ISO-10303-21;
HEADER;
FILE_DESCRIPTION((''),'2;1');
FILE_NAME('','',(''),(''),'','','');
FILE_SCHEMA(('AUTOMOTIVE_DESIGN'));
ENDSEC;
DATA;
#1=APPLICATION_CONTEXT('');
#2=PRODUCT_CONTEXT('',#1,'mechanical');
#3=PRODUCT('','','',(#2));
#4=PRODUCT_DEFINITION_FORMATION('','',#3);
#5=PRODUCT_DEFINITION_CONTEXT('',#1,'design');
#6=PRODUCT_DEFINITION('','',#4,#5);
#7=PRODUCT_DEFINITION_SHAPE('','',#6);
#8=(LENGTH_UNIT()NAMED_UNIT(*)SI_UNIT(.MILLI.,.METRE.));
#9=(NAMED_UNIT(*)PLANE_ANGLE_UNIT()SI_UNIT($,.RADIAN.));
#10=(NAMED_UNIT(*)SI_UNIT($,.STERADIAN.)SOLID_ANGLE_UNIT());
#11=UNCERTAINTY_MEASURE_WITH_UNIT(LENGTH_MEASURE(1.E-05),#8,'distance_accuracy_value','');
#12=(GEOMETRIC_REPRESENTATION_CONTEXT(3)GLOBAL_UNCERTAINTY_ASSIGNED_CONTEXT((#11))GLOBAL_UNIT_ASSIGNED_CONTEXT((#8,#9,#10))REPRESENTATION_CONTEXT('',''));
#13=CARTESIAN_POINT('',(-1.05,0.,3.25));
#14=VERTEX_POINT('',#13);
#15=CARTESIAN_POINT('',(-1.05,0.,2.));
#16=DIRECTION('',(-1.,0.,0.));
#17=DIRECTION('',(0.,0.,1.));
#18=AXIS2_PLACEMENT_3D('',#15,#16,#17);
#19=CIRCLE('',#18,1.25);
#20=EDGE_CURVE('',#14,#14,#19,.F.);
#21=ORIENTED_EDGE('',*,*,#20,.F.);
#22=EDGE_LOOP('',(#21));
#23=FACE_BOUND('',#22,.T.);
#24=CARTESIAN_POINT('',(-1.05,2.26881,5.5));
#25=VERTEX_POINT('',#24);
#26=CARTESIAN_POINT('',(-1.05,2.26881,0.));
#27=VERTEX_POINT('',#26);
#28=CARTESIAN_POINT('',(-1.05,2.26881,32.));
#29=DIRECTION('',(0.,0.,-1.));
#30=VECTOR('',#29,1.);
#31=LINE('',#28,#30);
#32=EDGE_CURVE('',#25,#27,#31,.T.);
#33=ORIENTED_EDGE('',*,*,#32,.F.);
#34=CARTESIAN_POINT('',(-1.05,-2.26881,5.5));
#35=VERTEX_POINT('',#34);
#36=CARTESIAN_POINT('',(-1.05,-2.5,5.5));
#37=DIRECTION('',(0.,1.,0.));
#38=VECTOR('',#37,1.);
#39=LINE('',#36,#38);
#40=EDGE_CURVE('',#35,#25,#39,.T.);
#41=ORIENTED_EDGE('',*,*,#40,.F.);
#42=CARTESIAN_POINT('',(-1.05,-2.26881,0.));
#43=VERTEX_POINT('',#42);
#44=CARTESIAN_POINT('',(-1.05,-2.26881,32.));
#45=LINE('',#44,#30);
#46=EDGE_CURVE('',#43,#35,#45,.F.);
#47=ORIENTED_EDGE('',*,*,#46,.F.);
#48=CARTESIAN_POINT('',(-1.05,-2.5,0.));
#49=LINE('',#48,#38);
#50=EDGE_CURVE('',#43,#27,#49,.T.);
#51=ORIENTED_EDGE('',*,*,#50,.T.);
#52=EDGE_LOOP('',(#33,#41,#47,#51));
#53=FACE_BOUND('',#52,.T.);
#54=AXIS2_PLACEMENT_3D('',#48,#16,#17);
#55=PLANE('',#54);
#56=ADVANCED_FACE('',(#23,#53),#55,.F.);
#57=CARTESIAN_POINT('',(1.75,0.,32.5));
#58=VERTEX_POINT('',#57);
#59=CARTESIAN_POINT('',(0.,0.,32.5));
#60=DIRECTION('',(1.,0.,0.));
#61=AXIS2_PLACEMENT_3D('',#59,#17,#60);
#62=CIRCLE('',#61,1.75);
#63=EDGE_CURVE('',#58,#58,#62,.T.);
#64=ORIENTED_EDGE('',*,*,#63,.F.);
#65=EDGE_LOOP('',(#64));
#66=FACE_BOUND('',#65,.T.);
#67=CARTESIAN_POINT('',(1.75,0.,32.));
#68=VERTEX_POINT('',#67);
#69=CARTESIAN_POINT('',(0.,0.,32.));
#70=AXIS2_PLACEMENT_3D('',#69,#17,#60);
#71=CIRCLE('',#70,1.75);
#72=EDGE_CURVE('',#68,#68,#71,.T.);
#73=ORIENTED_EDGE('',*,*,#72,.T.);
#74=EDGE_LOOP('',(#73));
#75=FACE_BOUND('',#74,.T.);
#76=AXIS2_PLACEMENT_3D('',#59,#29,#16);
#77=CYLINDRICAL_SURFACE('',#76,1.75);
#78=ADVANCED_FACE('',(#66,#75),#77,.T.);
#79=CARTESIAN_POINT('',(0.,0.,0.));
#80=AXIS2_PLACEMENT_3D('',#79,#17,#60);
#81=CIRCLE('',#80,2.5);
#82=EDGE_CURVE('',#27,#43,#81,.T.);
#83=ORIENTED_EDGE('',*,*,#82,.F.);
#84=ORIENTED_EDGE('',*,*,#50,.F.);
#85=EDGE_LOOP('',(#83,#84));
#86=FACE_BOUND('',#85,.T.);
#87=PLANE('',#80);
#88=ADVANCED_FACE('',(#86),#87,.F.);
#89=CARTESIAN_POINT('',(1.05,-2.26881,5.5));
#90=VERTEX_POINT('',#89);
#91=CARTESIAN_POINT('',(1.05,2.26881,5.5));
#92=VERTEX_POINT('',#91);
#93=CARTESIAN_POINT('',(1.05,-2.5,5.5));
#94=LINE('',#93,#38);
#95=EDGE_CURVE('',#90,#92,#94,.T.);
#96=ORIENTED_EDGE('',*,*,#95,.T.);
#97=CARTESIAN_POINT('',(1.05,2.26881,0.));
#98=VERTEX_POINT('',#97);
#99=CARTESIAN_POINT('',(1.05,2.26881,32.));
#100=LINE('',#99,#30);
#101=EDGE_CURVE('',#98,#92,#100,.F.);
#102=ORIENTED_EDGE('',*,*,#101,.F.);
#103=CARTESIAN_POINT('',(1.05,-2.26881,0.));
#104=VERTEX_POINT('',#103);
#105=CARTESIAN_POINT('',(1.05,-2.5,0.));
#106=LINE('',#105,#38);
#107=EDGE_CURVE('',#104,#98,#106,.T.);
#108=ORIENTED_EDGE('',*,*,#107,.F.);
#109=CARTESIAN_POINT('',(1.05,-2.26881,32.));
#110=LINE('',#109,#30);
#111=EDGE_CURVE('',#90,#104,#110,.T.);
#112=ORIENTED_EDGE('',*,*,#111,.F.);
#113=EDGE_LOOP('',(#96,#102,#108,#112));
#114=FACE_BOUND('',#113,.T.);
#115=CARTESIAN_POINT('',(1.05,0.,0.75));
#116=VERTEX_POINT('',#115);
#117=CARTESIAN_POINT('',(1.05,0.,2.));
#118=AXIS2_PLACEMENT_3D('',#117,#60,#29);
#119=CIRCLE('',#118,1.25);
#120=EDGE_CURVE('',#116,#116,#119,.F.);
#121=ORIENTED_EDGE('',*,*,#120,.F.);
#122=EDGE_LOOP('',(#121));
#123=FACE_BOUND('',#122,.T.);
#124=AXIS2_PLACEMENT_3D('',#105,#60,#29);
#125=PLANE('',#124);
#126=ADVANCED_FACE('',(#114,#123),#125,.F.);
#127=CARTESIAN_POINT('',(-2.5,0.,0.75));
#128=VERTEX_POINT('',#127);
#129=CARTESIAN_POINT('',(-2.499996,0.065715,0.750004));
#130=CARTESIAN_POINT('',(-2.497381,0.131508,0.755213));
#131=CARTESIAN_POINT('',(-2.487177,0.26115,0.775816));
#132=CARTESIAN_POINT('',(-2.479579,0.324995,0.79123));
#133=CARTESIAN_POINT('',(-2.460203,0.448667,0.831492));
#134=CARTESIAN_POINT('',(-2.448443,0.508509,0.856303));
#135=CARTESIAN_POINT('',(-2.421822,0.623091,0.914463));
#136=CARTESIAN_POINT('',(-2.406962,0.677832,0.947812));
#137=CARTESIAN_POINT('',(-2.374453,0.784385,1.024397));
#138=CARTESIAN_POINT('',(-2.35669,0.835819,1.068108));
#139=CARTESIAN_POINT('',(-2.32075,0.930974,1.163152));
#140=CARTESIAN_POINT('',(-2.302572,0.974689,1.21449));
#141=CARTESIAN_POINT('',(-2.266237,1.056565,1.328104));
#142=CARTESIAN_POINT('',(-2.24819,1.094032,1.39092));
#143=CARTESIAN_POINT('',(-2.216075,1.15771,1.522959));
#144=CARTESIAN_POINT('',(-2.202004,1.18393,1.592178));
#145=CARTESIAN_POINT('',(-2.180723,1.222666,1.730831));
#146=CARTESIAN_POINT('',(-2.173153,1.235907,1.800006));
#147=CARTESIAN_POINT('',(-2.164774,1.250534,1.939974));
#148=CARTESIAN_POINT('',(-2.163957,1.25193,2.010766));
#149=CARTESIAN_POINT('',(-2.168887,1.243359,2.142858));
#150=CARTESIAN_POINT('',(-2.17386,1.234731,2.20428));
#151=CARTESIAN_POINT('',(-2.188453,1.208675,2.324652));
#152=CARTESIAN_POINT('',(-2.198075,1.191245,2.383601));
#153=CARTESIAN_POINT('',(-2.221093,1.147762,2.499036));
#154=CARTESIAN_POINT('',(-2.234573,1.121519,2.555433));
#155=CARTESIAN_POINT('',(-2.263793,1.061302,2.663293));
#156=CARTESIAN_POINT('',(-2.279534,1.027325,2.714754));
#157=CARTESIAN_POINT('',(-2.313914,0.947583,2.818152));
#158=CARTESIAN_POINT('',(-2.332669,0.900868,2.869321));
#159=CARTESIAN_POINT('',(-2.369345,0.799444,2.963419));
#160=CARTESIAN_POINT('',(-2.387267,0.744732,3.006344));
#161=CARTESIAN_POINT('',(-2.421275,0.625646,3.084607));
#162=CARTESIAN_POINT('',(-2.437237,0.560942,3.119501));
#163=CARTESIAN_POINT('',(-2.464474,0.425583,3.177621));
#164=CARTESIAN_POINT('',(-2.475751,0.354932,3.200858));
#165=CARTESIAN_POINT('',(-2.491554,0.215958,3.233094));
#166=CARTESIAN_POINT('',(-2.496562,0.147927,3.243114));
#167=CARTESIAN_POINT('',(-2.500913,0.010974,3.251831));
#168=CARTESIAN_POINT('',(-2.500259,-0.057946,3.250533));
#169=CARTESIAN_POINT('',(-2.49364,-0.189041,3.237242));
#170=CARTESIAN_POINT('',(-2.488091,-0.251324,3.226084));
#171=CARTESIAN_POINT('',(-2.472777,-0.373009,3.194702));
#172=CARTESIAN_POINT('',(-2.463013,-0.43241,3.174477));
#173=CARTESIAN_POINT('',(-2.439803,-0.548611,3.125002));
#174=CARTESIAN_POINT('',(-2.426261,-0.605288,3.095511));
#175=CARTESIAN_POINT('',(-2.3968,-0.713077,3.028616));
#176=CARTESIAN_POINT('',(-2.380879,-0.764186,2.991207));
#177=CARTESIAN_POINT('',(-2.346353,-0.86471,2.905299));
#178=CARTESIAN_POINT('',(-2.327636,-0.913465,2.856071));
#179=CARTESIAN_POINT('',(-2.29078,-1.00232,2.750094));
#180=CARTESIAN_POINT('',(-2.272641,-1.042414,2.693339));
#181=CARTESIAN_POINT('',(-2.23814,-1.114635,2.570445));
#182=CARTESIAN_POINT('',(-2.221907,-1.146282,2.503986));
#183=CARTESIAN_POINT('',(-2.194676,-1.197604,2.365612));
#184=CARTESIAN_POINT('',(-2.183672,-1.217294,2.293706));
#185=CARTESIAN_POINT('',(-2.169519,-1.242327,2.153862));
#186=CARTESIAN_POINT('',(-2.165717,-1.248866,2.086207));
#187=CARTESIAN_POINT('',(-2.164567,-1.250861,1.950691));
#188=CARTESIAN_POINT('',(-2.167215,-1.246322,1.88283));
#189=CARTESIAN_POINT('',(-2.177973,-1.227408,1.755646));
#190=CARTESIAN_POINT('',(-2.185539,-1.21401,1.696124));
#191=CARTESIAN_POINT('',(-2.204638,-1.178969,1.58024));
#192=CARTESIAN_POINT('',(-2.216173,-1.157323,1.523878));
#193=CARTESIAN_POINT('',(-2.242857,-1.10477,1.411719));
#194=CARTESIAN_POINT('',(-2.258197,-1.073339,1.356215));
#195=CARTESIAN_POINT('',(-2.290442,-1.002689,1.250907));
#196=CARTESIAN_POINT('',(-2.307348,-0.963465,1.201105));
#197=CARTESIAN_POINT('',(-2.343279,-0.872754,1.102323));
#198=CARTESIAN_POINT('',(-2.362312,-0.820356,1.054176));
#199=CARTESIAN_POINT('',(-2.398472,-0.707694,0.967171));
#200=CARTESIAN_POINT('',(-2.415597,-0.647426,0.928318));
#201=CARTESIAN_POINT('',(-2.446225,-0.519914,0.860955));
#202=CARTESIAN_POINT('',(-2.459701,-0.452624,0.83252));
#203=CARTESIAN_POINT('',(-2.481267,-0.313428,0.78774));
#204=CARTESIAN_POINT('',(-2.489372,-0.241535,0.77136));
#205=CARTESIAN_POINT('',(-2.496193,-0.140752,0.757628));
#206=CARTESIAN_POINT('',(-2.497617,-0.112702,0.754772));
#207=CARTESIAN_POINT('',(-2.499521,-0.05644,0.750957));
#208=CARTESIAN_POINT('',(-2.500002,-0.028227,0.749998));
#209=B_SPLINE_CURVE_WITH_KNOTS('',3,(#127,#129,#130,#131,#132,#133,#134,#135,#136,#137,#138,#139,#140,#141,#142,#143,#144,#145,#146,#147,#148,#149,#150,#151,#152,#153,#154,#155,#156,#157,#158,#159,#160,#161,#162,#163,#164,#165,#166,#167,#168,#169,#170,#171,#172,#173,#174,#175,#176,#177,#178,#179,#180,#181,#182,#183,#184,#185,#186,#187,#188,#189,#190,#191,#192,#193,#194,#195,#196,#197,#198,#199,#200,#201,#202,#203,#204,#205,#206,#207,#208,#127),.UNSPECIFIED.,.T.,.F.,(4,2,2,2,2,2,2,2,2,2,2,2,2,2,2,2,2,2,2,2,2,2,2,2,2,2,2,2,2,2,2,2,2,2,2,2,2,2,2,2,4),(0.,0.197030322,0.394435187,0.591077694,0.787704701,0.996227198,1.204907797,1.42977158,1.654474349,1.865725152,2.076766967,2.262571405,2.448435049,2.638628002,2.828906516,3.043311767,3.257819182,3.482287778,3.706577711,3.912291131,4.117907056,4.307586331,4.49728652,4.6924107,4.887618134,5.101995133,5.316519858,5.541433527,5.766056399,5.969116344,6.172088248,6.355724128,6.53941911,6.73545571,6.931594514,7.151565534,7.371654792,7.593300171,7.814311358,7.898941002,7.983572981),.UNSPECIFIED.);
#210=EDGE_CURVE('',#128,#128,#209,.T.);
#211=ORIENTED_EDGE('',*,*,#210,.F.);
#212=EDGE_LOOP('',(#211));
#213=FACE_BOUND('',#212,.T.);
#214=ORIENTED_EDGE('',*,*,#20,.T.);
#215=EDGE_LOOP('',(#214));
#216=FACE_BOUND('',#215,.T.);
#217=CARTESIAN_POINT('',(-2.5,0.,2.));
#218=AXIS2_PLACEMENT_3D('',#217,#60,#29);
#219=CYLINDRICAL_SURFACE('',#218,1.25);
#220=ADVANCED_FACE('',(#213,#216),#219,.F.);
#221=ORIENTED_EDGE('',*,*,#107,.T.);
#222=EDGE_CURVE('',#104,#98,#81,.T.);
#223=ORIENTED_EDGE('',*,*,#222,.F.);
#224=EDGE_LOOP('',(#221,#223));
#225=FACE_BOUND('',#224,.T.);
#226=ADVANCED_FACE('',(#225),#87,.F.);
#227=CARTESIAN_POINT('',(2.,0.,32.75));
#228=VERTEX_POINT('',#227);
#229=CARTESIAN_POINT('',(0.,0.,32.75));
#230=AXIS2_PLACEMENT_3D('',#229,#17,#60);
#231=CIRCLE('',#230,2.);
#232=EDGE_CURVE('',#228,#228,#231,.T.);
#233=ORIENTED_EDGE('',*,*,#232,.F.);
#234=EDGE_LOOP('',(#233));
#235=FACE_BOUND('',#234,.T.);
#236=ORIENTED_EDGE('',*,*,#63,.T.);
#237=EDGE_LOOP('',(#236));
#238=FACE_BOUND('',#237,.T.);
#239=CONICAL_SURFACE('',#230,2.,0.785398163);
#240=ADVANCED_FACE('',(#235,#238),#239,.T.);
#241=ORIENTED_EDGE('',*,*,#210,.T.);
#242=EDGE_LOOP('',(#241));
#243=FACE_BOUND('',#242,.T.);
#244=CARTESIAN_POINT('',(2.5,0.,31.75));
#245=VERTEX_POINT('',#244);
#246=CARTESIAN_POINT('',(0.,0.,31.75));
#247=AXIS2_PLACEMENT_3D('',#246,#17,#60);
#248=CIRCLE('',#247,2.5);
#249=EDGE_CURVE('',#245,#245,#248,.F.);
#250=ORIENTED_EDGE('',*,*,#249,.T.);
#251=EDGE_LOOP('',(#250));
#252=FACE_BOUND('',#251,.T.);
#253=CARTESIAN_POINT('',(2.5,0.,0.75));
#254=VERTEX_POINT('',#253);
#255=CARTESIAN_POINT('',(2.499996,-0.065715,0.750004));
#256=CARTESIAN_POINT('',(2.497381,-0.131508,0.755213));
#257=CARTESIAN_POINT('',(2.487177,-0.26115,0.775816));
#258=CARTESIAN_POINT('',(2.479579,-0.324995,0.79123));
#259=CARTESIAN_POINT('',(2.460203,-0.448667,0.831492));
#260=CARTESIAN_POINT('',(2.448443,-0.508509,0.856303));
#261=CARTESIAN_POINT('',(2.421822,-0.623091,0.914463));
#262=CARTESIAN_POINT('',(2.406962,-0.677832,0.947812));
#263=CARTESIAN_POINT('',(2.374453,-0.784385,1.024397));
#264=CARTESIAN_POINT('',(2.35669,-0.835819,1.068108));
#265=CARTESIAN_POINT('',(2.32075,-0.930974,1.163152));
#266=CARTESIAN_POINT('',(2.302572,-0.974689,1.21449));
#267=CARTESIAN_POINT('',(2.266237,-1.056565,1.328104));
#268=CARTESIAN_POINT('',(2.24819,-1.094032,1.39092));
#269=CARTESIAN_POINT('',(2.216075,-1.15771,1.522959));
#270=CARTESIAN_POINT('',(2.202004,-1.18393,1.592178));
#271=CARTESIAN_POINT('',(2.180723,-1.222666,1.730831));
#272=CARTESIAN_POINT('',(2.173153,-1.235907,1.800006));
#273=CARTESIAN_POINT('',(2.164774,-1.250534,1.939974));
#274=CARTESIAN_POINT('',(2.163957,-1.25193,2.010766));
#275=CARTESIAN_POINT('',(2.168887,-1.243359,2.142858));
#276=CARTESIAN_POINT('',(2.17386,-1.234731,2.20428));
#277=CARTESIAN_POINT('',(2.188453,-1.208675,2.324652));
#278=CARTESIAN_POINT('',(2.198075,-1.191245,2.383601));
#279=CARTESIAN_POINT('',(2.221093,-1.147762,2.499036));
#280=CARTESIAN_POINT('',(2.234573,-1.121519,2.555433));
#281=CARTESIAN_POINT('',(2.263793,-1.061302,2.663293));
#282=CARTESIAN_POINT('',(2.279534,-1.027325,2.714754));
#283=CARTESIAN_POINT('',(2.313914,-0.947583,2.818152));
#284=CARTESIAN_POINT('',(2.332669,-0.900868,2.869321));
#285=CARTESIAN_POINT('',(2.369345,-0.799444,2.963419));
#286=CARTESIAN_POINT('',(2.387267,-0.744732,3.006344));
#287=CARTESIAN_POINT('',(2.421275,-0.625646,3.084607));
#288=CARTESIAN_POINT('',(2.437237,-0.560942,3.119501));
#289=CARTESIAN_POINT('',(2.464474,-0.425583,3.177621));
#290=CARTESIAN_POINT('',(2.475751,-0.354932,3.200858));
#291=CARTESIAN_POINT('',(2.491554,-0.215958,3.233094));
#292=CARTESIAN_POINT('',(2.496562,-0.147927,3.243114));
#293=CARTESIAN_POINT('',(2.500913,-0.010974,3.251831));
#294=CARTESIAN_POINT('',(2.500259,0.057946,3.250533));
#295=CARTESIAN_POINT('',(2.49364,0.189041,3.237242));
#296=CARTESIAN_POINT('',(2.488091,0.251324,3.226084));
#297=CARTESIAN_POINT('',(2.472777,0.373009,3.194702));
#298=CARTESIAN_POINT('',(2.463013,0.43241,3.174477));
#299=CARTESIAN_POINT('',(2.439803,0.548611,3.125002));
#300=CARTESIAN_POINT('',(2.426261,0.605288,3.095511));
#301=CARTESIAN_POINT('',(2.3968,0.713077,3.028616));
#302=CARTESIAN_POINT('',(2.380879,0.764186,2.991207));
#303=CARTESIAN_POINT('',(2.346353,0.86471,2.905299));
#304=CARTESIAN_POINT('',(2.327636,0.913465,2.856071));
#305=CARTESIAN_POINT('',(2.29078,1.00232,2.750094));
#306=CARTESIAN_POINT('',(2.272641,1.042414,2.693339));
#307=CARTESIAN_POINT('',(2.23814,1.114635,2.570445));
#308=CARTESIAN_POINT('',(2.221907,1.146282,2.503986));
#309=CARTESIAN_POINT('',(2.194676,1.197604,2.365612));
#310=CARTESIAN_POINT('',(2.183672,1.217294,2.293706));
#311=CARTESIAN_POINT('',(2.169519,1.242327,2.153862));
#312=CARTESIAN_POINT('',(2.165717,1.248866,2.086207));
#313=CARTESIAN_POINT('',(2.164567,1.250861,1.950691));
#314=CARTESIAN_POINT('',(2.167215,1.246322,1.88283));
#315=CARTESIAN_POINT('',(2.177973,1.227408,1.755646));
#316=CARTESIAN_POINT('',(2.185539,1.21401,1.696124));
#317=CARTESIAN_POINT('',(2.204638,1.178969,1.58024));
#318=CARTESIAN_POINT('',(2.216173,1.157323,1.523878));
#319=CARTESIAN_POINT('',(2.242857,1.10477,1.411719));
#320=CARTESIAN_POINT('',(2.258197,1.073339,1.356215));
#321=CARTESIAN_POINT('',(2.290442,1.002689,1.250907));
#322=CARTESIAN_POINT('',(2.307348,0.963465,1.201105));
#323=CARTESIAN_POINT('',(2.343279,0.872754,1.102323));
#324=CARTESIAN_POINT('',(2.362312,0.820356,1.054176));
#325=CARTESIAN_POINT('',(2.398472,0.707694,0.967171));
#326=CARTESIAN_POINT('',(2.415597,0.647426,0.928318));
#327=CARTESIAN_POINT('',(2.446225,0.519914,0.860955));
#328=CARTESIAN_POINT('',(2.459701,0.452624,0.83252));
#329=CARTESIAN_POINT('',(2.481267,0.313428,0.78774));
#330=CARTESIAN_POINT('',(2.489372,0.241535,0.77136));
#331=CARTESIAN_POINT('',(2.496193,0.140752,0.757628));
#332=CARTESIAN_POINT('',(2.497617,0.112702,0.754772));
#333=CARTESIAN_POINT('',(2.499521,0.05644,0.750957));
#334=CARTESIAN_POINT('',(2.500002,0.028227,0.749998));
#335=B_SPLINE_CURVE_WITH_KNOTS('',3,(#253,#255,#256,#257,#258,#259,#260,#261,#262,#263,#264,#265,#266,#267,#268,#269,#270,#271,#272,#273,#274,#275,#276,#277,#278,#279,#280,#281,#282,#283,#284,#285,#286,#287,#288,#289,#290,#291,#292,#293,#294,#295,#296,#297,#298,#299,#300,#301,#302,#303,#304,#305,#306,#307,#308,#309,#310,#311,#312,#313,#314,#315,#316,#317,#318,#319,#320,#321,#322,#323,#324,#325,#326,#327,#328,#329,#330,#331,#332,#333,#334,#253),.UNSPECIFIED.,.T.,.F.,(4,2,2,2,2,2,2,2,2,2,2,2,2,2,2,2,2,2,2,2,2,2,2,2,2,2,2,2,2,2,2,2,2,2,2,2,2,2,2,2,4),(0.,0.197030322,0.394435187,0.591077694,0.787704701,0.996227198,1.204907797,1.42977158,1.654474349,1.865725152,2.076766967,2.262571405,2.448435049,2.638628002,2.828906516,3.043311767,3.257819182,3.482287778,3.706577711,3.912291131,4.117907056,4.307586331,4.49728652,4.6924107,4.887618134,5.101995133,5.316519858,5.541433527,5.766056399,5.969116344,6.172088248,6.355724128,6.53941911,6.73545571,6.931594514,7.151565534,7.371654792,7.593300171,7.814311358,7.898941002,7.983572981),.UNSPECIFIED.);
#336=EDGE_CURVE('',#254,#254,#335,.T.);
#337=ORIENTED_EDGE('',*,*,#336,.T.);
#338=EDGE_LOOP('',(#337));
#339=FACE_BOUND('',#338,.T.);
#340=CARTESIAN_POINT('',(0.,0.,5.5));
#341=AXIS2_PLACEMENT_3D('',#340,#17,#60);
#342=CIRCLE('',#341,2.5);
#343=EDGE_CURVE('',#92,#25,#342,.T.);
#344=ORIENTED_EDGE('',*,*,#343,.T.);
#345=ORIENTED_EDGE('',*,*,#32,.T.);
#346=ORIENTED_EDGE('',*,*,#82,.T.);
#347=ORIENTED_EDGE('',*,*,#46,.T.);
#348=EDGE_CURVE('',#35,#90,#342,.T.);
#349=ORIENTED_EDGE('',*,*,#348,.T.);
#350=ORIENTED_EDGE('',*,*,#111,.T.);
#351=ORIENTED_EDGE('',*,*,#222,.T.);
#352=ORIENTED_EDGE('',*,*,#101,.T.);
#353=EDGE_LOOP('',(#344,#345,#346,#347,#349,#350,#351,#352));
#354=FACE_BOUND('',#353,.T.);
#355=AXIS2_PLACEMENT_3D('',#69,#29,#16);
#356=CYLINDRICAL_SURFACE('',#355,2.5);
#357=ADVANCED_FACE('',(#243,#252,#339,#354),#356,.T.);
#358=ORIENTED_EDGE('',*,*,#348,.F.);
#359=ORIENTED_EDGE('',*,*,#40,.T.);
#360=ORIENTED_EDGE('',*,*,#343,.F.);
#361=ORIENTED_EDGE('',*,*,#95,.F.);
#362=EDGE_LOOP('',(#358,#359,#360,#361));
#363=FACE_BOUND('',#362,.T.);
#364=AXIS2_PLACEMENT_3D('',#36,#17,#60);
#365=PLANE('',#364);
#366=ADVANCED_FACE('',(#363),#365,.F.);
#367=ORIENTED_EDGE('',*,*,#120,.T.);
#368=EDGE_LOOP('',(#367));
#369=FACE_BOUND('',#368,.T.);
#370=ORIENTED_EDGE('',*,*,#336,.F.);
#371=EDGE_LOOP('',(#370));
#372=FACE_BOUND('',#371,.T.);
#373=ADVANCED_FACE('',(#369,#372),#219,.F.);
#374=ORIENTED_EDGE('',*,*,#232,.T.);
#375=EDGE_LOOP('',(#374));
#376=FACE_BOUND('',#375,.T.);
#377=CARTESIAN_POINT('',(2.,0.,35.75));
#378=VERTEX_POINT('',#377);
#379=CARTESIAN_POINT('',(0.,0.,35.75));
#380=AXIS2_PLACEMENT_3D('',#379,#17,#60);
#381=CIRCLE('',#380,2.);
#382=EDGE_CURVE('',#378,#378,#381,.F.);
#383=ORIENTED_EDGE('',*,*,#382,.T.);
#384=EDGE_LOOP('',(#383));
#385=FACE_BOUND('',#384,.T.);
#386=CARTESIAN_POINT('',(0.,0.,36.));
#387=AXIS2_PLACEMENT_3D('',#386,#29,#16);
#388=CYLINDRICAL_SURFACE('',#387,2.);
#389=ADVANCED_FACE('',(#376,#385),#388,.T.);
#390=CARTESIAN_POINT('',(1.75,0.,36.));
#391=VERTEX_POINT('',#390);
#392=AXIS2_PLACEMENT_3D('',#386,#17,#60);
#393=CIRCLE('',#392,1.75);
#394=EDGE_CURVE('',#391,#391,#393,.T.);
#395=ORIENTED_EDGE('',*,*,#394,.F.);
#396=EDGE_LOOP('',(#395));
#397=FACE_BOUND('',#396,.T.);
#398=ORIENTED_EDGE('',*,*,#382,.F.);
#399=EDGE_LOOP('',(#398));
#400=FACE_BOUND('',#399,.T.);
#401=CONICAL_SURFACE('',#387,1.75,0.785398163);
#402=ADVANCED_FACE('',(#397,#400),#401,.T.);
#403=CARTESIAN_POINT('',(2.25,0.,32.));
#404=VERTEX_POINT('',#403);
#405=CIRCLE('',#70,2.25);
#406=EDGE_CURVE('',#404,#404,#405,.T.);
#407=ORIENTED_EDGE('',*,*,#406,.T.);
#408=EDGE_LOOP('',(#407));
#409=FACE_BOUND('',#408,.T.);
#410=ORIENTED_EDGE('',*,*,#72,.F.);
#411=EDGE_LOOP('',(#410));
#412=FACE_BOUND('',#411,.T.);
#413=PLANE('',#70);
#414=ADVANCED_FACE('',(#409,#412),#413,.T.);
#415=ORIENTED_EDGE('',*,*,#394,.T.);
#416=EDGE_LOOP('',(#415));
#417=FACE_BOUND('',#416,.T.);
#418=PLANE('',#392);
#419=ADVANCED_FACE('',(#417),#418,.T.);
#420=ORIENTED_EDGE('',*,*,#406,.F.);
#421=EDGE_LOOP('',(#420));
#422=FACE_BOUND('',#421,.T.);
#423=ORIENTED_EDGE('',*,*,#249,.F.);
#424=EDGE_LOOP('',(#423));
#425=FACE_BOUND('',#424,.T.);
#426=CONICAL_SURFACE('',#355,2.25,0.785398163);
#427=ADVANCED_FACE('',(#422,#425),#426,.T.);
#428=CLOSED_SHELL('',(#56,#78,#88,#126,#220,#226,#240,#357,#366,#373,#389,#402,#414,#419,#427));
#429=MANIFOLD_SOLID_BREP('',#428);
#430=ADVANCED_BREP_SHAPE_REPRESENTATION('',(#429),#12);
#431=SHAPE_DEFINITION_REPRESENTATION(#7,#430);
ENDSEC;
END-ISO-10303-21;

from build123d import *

# Parameters (mm, degrees)
SKETCH1_R               = 2.5
BOSS_EXTRUDE1_DEPTH     = 32
SKETCH2_R               = 1.75
BOSS_EXTRUDE2_DEPTH     = 0.5
SKETCH4_R               = 2
BOSS_EXTRUDE3_DEPTH     = 3.5
CHAMFER1_SIZE           = 0.25
CUT_EXTRUDE1_DEPTH      = 37.173194495
CUT_EXTRUDE1_DEPTH_BACK = 37.173194495
SKETCH5_R               = 1.25
CUT_EXTRUDE2_DEPTH      = 37.173194509
CUT_EXTRUDE2_DEPTH_BACK = 37.173194509
SKETCH6_W               = 2.1
SKETCH6_H               = 5.5


with BuildPart() as part:
    # Sketch1 → Boss-Extrude1 (new body)
    with BuildSketch(Plane.XY):
        Circle(SKETCH1_R)
    extrude(amount=BOSS_EXTRUDE1_DEPTH)

    # Sketch2 → Boss-Extrude2 (add)
    with BuildSketch(Plane.XY.offset(32)):
        Circle(SKETCH2_R)
    extrude(amount=BOSS_EXTRUDE2_DEPTH)

    # Sketch4 → Boss-Extrude3 (add)
    with BuildSketch(Plane.XY.offset(32.5)):
        Circle(SKETCH4_R)
    extrude(amount=BOSS_EXTRUDE3_DEPTH)

    # Chamfer1
    chamfer1_edges = [part.edges().sort_by_distance(p)[0] for p in [
        (-2, 0, 32.5),
        (-2, 0, 36),
        (-2.5, 0, 32),
    ]]
    chamfer(chamfer1_edges, length=CHAMFER1_SIZE - 0.0001)  # a hair under: the kernel refuses the full size

    # Sketch5 → Cut-Extrude1 (cut, two sides: drawn at the far end of the back side and taken through both)
    with BuildSketch(Plane(origin=(0, 0, 0), x_dir=(0, 0, -1), z_dir=(1, 0, 0)).offset(-CUT_EXTRUDE1_DEPTH_BACK)):
        with Locations((-2, 0)):
            Circle(SKETCH5_R)
    extrude(amount=CUT_EXTRUDE1_DEPTH + CUT_EXTRUDE1_DEPTH_BACK, mode=Mode.SUBTRACT)

    # Sketch6 → Cut-Extrude2 (cut, two sides: drawn at the far end of the back side and taken through both)
    with BuildSketch(Plane(origin=(0, 0, 0), x_dir=(1, 0, 0), z_dir=(0, 1, 0)).offset(-CUT_EXTRUDE2_DEPTH_BACK)):
        with Locations((0, -2.75)):
            Rectangle(SKETCH6_W, SKETCH6_H)
    extrude(amount=CUT_EXTRUDE2_DEPTH + CUT_EXTRUDE2_DEPTH_BACK, mode=Mode.SUBTRACT)


solid = part.part
